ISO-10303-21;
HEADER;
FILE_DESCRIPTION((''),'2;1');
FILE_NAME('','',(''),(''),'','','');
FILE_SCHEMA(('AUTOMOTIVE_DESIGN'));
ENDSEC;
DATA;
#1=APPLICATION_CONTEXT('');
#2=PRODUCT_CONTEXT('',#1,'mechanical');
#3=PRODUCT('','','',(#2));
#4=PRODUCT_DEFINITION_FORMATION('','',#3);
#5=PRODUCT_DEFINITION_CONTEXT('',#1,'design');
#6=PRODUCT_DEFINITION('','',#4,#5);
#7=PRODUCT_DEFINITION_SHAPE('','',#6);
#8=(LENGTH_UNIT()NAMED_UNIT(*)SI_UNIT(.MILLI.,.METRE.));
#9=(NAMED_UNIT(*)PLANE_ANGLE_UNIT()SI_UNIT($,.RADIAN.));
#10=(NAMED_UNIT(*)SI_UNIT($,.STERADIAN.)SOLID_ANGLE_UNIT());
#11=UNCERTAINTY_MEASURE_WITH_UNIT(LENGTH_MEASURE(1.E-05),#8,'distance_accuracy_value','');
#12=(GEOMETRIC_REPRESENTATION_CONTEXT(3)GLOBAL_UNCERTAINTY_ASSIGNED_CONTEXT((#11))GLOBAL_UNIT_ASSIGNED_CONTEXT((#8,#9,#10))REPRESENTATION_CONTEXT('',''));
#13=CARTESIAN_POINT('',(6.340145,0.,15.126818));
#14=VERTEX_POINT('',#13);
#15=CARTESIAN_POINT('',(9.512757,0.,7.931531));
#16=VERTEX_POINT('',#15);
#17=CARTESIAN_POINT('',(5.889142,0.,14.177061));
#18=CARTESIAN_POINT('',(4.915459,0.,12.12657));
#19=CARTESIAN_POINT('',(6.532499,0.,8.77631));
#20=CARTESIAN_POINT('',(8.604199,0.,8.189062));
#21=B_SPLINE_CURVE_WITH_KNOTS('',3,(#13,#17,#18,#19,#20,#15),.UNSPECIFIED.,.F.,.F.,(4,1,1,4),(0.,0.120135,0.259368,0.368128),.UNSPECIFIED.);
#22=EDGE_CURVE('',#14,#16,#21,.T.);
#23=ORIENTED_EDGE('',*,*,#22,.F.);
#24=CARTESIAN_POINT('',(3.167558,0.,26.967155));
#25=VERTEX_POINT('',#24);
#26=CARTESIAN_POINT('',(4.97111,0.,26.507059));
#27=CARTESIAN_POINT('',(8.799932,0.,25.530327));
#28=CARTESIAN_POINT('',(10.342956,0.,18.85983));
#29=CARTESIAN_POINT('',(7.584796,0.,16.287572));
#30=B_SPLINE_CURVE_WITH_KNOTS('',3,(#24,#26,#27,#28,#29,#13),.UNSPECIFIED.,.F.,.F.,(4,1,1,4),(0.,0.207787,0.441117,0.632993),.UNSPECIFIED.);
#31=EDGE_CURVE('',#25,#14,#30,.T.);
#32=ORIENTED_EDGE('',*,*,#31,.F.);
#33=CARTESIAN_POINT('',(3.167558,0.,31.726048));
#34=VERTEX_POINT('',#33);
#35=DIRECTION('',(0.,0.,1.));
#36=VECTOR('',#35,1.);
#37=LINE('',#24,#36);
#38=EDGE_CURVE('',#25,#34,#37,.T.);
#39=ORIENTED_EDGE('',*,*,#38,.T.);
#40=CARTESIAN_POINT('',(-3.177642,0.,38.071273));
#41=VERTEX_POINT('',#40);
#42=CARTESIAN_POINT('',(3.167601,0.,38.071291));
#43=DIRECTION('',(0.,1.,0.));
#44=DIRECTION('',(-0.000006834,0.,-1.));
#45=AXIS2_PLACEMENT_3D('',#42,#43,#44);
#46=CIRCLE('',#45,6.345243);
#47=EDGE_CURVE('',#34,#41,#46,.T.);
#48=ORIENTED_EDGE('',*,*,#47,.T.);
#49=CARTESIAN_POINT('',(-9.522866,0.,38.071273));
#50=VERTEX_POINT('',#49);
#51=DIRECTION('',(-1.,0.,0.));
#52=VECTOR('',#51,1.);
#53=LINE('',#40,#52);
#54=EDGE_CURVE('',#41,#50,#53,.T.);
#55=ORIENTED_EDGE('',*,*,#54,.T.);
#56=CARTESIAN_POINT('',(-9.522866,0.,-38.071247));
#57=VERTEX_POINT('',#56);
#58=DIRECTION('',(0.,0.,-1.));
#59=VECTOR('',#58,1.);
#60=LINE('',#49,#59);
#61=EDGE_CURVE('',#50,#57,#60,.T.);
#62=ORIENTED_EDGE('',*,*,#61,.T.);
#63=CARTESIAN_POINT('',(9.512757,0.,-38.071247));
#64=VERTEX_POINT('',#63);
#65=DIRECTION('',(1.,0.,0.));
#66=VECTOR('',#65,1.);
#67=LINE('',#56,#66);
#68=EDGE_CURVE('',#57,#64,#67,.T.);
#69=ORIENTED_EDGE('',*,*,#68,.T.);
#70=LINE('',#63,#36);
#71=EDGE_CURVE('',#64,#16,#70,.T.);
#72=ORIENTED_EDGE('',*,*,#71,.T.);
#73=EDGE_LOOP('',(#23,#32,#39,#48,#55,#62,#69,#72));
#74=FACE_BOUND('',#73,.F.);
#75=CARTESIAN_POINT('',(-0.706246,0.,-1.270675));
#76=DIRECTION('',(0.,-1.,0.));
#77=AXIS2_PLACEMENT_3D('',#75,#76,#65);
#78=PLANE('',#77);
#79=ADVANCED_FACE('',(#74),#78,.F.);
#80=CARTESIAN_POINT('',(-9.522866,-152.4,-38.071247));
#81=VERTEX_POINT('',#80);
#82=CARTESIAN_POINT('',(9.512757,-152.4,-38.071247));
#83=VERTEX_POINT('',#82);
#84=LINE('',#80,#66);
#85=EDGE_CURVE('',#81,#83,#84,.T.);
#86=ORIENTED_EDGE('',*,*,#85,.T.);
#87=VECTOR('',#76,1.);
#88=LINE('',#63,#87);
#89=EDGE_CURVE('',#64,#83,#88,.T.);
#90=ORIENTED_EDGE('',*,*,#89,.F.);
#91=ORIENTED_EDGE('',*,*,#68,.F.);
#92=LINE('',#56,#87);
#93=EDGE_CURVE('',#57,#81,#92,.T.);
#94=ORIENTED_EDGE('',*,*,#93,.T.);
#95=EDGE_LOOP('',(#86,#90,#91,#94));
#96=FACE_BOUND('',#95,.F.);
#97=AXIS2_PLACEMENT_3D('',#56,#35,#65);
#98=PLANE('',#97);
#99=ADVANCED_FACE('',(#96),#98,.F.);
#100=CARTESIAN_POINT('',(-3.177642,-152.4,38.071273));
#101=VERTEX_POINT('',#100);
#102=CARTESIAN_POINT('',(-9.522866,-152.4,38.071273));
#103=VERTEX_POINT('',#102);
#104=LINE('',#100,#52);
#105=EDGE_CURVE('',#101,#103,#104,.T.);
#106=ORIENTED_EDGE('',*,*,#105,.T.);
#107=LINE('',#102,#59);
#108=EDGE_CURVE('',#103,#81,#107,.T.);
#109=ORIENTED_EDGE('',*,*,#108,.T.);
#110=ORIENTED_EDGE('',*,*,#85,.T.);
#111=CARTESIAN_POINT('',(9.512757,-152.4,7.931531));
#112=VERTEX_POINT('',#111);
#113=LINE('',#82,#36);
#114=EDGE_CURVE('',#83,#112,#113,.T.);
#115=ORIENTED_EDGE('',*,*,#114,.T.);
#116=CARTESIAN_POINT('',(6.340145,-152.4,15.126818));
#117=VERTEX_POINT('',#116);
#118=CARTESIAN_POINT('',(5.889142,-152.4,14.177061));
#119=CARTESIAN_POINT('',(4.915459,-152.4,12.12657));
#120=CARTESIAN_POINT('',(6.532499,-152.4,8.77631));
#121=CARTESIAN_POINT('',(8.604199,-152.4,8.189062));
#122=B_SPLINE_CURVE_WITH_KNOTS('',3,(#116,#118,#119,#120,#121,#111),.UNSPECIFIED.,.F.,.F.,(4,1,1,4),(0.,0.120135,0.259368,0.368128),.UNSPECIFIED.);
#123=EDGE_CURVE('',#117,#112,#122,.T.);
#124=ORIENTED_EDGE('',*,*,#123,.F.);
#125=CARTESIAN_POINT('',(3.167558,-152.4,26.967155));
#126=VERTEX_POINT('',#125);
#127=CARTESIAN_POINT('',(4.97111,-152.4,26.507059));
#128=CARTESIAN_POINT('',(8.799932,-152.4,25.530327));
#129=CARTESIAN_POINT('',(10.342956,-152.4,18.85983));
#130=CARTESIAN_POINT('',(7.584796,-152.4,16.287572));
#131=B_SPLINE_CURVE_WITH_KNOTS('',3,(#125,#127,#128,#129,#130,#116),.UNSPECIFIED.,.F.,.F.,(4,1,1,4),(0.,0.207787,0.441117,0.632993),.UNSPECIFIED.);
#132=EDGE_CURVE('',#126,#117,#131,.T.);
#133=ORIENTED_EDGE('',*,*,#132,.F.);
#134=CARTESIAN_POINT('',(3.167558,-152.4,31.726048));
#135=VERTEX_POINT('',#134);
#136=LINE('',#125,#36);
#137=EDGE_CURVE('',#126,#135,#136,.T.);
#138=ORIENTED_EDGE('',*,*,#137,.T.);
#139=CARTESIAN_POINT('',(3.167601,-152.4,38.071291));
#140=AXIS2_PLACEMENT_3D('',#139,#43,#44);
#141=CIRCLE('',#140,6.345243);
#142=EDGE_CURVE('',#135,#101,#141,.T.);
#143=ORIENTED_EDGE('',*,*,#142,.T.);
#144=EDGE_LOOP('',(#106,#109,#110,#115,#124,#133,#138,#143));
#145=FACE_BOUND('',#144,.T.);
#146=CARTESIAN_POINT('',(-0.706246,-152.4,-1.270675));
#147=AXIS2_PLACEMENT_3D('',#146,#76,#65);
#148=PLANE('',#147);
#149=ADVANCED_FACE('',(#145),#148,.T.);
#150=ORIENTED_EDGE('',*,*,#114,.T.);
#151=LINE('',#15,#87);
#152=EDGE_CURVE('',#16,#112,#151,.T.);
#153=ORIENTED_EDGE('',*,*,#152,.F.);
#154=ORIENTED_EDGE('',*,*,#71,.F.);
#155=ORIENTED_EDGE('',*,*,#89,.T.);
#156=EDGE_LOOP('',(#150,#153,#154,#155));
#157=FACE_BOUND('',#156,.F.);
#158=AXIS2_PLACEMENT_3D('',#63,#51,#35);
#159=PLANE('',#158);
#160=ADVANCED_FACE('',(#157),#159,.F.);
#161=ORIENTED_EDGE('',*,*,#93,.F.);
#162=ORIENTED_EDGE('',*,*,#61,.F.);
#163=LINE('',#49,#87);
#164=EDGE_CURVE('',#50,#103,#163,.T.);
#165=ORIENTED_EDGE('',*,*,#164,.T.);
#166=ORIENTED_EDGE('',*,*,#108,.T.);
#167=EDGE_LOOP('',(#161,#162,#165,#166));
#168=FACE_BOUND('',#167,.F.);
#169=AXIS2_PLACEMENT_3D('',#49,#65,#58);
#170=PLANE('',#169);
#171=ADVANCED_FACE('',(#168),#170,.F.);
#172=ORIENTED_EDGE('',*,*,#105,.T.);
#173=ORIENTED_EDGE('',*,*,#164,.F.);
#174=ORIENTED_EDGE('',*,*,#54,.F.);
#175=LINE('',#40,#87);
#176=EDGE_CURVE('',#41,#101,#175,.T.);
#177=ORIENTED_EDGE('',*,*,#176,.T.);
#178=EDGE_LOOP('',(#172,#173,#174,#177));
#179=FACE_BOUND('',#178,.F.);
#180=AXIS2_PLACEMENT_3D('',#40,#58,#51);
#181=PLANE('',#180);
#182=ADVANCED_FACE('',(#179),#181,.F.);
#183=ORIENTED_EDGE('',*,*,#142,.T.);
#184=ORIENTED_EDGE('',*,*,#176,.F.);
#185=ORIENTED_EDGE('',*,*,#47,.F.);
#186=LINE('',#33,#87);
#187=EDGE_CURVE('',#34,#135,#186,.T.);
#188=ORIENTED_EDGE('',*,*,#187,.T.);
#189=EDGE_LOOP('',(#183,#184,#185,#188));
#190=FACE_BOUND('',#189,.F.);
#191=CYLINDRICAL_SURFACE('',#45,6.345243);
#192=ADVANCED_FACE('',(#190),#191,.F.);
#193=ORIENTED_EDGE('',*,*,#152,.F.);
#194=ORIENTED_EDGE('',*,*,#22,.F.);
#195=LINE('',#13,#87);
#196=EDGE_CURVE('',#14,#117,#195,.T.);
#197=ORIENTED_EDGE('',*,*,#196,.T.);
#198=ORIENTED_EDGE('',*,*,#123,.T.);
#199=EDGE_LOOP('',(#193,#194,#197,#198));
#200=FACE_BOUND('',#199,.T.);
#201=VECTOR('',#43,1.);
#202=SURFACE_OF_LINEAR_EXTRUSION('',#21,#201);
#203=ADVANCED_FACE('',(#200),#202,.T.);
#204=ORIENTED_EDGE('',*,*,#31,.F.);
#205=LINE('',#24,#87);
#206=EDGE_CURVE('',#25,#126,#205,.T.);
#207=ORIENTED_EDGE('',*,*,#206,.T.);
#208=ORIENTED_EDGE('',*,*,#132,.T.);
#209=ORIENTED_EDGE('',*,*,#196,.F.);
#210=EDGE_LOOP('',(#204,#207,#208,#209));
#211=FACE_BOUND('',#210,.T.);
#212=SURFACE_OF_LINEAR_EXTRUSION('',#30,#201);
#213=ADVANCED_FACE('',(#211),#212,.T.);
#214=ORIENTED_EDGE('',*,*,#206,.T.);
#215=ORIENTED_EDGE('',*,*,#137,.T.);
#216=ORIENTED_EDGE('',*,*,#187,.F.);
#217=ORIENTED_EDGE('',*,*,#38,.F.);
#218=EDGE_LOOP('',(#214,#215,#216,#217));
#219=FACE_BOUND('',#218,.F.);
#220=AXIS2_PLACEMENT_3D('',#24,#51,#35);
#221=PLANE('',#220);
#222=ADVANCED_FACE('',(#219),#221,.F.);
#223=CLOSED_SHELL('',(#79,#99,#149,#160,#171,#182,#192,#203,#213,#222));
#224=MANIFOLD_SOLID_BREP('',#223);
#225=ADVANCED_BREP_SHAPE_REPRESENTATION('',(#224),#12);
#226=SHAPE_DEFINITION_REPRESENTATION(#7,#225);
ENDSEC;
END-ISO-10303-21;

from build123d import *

# Parameters (mm, degrees)
F1_DEPTH = 152.4


# Not quite as in the source:
# - ends of sketch curves that miss each other by under 0.0002 mm in the source are joined
# - the dataset's text gives a spline's control points without its knots; the knots are read off the source's solid


with BuildPart() as f1:
    # F0 (on Front) → F1 (new body)
    with BuildSketch(Plane.XZ):
        with BuildLine():
            Line((9.5127572, -38.0712472), (9.5127572, 7.931531))
            add(Edge.make_bspline(
                [(6.3401448, 15.1268176), (5.8891424, 14.1770608), (4.9154588, 12.1265696), (6.532499, 8.7763096), (8.6041992, 8.1890616), (9.5127572, 7.931531)],
                knots=[0, 0, 0, 0, 0.120135, 0.259368, 0.368128, 0.368128, 0.368128, 0.368128], degree=3))
            add(Edge.make_bspline(
                [(3.1675578, 26.9671546), (4.9711102, 26.507059), (8.7999316, 25.5303274), (10.3429562, 18.8598302), (7.5847956, 16.2875722), (6.3401448, 15.1268176)],
                knots=[0, 0, 0, 0, 0.207787, 0.441117, 0.632993, 0.632993, 0.632993, 0.632993], degree=3))
            Line((3.1675578, 26.9671546), (3.1675578, 31.7260478))
            ThreePointArc((3.1675578, 31.7260478), (-1.3191757237, 33.5845390763), (-3.1776416, 38.0712726))
            Line((-3.1776416, 38.0712726), (-9.5228664, 38.0712726))
            Line((-9.5228664, 38.0712726), (-9.5228664, -38.0712472))
            Line((-9.5228664, -38.0712472), (9.5127572, -38.0712472))
        make_face()
    extrude(amount=F1_DEPTH)


solid = f1.part
